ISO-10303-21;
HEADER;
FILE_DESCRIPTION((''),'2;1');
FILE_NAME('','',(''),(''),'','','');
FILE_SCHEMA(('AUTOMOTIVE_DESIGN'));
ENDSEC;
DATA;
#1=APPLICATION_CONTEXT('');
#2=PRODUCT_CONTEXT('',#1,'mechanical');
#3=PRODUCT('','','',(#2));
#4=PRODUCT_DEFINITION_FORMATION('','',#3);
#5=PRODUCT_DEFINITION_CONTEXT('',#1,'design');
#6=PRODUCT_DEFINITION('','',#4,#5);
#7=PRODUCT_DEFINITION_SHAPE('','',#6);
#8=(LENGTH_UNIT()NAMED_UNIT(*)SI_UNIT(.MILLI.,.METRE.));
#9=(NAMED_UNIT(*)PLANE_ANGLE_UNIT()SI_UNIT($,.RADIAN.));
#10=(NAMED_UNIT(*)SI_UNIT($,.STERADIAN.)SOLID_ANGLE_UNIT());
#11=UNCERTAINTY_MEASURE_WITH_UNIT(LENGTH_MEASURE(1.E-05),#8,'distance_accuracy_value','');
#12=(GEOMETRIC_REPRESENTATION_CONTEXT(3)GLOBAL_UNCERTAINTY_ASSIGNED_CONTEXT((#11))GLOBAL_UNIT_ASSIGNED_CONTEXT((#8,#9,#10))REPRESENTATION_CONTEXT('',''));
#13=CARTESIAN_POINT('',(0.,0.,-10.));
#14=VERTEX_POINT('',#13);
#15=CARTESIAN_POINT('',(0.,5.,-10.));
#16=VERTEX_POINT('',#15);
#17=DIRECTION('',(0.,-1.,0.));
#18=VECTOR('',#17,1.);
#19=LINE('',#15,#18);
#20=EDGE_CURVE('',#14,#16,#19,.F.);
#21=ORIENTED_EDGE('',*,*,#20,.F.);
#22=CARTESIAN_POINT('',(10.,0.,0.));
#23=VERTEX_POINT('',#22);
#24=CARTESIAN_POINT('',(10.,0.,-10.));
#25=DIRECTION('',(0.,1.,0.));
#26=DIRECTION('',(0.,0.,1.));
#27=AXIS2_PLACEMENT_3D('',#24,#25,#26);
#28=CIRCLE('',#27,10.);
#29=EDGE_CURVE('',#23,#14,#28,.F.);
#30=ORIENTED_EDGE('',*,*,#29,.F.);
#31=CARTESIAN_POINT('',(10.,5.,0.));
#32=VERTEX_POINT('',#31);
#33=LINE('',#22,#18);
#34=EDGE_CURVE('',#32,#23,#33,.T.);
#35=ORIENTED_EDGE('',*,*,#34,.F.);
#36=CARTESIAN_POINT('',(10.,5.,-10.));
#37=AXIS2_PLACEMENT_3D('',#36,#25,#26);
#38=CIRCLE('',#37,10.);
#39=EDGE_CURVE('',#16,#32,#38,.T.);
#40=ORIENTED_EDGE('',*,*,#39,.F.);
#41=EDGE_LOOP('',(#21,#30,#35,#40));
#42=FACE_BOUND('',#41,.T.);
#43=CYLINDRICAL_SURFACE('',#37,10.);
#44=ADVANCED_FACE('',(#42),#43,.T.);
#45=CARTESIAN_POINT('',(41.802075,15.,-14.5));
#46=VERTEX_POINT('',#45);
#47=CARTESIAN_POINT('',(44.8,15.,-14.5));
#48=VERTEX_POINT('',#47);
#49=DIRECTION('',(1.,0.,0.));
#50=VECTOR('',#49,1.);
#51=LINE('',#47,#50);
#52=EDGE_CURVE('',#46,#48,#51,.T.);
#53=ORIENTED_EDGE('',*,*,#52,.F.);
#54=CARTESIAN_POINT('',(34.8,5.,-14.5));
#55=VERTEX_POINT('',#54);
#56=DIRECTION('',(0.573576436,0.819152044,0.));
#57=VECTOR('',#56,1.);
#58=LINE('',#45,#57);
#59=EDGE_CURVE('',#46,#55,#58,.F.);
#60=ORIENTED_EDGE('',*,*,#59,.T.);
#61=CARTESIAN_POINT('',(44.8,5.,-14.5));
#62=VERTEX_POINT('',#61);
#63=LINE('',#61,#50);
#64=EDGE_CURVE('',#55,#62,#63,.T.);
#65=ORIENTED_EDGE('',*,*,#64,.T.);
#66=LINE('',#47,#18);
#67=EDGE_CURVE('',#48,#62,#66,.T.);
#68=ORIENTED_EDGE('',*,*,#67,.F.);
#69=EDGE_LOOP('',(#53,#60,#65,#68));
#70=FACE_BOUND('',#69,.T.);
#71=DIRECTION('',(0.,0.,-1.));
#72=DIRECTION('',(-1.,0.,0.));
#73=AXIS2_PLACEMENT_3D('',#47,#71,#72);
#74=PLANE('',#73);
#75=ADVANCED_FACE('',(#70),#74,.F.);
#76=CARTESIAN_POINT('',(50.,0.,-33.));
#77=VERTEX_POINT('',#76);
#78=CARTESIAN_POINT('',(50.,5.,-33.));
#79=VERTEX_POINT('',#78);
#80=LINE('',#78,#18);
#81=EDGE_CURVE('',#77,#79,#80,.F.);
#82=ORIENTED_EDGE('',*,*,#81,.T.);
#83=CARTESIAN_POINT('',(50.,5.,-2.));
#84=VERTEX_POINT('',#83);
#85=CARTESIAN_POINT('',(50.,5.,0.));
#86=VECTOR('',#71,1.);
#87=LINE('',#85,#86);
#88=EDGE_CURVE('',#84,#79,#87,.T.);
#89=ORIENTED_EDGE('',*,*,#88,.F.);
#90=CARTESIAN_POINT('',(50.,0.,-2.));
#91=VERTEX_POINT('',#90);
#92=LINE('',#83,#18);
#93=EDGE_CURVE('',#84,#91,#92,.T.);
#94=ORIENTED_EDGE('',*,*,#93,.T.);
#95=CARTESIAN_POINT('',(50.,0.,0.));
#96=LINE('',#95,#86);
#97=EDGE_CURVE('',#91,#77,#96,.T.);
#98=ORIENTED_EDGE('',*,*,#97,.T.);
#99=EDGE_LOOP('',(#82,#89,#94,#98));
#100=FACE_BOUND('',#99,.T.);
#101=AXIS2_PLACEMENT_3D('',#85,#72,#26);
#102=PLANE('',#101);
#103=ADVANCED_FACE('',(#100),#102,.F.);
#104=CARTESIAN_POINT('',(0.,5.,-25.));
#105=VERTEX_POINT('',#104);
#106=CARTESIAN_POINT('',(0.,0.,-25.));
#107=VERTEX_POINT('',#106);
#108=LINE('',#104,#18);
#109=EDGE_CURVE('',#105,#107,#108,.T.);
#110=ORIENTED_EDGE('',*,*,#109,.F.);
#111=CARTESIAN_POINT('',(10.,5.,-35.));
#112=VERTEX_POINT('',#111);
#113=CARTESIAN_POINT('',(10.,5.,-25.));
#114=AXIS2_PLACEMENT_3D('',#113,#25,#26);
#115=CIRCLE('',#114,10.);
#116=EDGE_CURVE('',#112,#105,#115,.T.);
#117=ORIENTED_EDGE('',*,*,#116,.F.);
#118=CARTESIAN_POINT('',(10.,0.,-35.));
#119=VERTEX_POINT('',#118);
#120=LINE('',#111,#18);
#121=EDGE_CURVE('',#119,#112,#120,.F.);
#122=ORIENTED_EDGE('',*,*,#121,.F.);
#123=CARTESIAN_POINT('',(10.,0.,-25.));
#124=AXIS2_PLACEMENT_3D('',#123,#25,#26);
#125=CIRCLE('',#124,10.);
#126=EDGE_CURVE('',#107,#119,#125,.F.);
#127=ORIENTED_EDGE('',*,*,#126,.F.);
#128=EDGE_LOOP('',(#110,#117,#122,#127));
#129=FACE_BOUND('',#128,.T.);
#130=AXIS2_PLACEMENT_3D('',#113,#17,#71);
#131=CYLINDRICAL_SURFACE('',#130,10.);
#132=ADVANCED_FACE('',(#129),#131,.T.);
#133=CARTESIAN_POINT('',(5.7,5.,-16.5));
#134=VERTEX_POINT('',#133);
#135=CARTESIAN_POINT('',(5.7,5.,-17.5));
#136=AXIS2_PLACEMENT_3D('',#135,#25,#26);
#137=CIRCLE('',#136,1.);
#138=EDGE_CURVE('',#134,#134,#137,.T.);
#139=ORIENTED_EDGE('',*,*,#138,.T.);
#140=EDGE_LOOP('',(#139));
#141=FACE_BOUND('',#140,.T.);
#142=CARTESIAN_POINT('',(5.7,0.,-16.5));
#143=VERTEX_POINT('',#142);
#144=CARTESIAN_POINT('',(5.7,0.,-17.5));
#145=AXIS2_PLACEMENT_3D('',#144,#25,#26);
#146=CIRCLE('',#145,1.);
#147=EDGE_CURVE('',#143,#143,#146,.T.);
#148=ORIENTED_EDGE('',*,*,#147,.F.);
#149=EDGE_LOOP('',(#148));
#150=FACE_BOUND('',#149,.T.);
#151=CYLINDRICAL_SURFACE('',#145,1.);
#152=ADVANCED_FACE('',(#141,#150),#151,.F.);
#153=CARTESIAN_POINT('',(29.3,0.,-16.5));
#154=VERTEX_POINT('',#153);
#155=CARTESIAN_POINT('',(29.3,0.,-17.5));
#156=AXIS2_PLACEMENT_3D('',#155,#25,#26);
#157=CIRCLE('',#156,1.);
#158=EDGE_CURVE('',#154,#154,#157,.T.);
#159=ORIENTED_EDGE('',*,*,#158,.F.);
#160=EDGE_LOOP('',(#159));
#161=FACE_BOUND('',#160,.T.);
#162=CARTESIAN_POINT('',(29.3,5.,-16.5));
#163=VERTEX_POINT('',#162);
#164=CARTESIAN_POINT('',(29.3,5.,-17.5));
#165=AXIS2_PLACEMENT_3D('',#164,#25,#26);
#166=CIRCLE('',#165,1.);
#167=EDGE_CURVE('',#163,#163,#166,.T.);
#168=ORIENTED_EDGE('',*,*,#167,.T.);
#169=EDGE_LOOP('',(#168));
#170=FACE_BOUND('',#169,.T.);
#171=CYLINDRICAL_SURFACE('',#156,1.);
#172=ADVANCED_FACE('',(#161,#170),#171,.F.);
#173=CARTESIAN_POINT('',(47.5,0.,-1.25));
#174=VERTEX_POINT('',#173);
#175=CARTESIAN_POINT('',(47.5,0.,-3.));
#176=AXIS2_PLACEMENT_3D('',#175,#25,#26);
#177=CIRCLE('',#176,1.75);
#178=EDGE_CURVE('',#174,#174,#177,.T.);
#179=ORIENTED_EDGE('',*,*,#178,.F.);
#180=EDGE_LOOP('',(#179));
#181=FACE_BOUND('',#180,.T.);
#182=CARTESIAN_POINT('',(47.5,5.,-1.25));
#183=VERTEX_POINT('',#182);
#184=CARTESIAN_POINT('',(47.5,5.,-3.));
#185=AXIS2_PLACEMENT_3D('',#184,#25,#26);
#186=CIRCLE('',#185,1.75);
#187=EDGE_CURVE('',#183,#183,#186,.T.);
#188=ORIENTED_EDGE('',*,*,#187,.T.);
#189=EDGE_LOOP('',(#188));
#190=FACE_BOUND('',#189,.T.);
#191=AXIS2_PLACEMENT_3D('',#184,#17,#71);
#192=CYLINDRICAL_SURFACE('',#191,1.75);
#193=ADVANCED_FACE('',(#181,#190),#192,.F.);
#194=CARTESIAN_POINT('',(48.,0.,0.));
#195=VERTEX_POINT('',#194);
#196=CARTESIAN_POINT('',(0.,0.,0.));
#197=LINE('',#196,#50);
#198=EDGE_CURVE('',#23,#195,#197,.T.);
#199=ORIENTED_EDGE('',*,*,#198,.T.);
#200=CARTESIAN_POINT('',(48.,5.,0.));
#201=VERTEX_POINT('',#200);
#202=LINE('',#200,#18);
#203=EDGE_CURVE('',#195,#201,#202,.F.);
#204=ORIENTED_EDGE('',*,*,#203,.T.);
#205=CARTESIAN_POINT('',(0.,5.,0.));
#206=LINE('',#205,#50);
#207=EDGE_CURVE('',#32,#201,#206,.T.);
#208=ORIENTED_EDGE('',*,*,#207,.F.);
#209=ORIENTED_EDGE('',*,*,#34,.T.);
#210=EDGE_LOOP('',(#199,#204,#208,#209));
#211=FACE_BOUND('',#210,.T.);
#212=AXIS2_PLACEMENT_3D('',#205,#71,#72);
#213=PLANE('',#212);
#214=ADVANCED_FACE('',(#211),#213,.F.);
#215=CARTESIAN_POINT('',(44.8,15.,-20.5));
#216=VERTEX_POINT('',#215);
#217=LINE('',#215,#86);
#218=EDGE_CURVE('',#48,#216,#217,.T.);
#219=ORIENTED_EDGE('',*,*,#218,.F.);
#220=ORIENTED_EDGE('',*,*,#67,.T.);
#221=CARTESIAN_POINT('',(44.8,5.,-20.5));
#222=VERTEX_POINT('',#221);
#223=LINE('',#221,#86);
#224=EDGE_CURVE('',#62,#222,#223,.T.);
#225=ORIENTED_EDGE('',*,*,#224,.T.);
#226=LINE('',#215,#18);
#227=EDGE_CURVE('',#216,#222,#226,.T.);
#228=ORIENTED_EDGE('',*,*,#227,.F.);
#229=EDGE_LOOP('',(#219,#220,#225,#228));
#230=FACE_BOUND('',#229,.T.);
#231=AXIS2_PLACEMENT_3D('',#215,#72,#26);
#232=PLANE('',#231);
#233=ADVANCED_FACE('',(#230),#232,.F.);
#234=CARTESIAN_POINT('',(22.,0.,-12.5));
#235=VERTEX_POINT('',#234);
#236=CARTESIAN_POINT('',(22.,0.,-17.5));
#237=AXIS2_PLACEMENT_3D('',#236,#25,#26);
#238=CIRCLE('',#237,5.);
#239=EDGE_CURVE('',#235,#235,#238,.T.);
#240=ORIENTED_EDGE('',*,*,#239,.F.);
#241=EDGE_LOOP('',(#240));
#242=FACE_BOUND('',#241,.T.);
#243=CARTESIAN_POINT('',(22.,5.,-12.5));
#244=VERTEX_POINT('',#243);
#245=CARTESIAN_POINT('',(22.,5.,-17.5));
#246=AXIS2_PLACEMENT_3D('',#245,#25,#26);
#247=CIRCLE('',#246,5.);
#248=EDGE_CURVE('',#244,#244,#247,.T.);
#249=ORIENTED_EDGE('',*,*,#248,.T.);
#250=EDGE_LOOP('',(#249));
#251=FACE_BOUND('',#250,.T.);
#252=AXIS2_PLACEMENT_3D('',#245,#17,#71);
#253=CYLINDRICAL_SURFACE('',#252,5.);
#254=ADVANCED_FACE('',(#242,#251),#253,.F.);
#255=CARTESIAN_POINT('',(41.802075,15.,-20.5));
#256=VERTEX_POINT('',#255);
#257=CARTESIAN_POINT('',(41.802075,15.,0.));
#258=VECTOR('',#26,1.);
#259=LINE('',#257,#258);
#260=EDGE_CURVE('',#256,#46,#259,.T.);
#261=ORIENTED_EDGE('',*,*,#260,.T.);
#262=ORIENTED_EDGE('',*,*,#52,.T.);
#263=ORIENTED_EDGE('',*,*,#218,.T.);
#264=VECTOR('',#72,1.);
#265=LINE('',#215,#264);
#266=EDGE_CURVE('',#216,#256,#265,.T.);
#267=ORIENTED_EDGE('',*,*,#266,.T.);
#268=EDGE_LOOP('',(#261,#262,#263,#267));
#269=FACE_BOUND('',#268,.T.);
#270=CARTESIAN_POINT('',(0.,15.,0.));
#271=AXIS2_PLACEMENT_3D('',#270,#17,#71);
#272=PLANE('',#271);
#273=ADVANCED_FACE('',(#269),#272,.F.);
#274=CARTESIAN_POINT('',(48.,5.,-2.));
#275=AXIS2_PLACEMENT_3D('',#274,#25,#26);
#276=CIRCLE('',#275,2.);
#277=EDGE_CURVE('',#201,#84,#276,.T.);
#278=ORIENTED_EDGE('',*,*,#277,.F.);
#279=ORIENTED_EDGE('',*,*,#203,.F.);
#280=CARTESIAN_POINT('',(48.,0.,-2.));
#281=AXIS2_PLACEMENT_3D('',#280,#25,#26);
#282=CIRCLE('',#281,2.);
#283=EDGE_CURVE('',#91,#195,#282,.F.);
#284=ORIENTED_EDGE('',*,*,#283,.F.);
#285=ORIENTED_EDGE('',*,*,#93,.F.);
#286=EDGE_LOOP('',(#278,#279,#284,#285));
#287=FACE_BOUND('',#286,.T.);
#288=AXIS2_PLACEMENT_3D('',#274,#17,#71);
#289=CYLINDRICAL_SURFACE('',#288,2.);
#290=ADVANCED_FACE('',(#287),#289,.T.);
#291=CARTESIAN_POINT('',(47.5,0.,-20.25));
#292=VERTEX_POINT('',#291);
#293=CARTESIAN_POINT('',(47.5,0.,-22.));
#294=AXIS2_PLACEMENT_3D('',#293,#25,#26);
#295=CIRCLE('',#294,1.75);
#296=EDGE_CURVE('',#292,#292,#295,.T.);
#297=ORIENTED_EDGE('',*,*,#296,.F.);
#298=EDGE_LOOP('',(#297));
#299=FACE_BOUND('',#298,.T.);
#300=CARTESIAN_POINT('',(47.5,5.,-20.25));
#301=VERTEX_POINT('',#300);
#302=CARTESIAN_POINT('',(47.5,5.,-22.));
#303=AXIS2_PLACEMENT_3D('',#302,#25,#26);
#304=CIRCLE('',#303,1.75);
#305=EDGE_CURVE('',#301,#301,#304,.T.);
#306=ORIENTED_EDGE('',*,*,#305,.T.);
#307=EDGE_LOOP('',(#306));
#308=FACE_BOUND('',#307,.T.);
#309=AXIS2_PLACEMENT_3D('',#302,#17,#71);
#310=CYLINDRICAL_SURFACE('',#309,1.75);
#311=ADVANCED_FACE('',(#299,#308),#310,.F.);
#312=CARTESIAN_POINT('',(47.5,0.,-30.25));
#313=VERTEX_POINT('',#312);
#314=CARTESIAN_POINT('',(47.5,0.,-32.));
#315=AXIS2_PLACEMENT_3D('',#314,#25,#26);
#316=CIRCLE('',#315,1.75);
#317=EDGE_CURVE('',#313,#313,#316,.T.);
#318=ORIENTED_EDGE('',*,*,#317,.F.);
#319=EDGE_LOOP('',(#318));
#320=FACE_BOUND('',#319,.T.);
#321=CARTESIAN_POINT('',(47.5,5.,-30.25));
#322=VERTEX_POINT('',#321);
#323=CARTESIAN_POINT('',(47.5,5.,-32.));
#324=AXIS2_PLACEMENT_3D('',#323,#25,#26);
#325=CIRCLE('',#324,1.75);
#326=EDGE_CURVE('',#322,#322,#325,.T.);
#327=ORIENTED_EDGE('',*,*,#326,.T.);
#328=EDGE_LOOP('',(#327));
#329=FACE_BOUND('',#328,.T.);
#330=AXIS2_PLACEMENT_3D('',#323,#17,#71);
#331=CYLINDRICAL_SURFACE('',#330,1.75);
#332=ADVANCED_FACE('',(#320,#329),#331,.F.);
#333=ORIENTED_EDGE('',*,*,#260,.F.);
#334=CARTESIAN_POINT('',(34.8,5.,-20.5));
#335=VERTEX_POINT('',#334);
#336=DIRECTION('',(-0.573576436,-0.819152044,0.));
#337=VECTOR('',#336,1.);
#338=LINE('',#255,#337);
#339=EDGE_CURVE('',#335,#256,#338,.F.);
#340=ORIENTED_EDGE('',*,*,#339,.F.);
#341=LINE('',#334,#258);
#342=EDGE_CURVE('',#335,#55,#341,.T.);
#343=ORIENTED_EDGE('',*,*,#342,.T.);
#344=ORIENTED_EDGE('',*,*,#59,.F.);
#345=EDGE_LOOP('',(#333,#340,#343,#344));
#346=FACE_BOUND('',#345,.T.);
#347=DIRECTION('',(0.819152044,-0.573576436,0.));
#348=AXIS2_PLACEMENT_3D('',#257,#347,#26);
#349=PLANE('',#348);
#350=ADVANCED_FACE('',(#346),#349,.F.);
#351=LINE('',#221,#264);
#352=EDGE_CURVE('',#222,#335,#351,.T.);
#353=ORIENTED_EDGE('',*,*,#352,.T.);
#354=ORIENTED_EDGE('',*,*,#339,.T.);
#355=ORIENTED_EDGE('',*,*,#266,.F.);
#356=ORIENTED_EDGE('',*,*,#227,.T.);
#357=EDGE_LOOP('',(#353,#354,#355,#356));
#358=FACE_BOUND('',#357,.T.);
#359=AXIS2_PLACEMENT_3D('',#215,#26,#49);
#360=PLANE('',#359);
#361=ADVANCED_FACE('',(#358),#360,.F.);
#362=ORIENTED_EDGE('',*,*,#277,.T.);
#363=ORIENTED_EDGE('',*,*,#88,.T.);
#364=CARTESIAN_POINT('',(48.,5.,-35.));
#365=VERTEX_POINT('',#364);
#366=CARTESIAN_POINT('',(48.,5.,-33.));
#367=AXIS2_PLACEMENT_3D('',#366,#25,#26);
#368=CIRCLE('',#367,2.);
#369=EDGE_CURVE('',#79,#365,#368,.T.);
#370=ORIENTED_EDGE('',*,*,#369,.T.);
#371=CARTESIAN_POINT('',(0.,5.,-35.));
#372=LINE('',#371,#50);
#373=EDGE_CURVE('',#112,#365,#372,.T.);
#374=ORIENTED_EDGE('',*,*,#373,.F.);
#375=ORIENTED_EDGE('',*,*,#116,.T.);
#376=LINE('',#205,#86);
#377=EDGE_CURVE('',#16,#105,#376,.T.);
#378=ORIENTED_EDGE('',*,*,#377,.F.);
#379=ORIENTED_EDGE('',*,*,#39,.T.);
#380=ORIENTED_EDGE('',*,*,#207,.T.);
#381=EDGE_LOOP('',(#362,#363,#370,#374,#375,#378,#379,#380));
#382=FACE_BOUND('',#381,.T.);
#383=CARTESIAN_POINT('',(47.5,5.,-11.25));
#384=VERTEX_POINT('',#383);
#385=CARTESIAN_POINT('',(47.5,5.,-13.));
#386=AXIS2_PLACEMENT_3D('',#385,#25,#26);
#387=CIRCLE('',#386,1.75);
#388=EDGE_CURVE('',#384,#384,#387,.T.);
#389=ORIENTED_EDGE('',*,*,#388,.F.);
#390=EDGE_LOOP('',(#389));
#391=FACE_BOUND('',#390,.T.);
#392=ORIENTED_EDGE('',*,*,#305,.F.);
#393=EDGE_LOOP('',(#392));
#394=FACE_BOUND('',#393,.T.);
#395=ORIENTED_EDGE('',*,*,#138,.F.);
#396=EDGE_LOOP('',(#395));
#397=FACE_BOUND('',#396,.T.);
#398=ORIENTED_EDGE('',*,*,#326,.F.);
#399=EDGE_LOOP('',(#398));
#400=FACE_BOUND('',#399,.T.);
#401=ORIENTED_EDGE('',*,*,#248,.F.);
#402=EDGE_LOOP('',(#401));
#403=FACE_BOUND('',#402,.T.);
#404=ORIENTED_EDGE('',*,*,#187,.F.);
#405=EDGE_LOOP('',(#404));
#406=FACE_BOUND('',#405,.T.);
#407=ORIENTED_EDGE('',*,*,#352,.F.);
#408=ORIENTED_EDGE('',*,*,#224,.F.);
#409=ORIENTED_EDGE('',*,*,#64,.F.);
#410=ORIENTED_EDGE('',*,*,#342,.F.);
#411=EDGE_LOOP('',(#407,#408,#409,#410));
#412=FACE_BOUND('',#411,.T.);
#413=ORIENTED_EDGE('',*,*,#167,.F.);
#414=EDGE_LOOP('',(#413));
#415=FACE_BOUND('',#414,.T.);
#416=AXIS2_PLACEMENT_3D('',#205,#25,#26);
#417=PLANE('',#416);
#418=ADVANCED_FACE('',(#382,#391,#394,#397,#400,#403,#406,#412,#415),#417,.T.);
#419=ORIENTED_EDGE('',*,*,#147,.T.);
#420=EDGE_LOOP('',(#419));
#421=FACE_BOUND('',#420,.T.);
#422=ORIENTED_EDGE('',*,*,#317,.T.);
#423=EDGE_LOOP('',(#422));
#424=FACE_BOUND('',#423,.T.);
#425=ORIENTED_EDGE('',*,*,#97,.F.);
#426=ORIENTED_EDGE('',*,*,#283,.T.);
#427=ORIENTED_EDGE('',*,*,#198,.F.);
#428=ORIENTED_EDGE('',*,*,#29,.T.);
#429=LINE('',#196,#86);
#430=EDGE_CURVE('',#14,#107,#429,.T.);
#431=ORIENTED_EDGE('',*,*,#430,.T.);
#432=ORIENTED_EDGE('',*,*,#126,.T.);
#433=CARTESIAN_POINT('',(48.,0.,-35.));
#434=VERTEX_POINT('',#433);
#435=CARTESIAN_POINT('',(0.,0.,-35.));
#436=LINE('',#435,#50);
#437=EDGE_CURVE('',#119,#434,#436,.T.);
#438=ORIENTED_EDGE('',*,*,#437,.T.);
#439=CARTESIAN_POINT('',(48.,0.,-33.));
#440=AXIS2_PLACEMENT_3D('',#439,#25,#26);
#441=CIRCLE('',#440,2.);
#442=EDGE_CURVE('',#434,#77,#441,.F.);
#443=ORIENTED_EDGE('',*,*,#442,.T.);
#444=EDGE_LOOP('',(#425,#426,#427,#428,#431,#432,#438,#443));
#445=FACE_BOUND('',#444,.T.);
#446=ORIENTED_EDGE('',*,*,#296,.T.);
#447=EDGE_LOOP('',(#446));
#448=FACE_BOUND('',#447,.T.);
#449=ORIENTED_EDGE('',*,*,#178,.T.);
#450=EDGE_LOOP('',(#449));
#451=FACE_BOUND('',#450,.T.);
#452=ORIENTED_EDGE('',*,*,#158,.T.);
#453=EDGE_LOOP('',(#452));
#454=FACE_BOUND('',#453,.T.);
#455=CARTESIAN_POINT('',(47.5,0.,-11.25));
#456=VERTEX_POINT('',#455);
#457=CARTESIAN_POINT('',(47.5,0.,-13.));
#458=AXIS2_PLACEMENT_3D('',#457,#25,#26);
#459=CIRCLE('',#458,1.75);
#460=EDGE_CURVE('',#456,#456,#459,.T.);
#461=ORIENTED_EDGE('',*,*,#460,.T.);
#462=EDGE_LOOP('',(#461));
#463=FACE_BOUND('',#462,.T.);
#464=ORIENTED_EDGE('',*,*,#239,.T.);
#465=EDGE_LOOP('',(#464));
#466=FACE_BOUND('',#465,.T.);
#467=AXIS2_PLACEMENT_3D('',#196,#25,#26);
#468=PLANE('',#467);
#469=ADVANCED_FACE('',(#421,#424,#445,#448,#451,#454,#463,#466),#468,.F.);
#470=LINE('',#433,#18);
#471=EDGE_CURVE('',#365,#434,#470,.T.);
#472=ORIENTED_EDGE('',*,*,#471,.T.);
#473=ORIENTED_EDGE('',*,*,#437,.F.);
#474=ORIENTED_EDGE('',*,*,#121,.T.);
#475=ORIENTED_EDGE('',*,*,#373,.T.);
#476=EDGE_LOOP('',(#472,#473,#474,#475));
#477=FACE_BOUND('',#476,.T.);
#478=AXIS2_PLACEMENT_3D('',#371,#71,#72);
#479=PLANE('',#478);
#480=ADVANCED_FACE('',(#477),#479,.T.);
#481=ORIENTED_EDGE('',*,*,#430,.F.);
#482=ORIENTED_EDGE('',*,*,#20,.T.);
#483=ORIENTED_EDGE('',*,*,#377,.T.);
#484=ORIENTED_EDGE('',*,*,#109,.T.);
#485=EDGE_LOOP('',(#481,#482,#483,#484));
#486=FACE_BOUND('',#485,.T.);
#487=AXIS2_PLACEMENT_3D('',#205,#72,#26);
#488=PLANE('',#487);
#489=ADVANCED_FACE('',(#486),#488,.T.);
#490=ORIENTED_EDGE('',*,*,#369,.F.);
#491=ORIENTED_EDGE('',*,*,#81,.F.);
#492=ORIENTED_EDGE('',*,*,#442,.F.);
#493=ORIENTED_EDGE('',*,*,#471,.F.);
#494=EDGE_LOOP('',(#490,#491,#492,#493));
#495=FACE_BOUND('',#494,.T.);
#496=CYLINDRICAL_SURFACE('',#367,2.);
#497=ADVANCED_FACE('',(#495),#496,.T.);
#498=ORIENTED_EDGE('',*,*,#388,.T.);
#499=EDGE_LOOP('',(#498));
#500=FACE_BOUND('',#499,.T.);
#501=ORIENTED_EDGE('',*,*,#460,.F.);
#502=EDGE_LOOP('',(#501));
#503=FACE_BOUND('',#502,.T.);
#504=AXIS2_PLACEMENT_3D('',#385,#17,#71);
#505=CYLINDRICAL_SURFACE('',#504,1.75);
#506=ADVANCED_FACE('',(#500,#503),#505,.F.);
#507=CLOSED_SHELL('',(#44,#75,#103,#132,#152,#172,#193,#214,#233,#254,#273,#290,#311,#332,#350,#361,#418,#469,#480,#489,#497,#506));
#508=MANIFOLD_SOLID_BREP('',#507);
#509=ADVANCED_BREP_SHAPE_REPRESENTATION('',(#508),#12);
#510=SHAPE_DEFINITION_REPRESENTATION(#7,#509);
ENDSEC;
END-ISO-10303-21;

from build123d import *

# Parameters (mm, degrees)
SKETCH1_W           = 50
SKETCH1_H           = 35
SKETCH1_R           = 5
SKETCH1_R_2         = 1.75
BOSS_EXTRUDE1_DEPTH = 5
FILLET1_R           = 10
FILLET2_R           = 2
SKETCH2_W           = 10
SKETCH2_H           = 6
BOSS_EXTRUDE2_DEPTH = 10
CHAMFER1_SIZE2      = 7.002075382
CHAMFER1_SIZE       = 10
SKETCH3_R           = 1
CUT_EXTRUDE1_DEPTH  = 62.846584384


with BuildPart() as part:
    # Sketch1 → Boss-Extrude1 (new body)
    with BuildSketch(Plane(origin=(0, 0, 0), x_dir=(1, 0, 0), z_dir=(0, 1, 0))):
        with Locations((25, 17.5)):
            Rectangle(SKETCH1_W, SKETCH1_H)
        with Locations(Location((22, 17.5, 0), (0, 0, 270))):
            Circle(SKETCH1_R, mode=Mode.SUBTRACT)
        with Locations(Location((47.5, 32, 0), (0, 0, 270))):
            Circle(SKETCH1_R_2, mode=Mode.SUBTRACT)
        with Locations(Location((47.5, 22, 0), (0, 0, 270))):
            Circle(SKETCH1_R_2, mode=Mode.SUBTRACT)
        with Locations(Location((47.5, 13, 0), (0, 0, 270))):
            Circle(SKETCH1_R_2, mode=Mode.SUBTRACT)
        with Locations(Location((47.5, 3, 0), (0, 0, 270))):
            Circle(SKETCH1_R_2, mode=Mode.SUBTRACT)
    extrude(amount=BOSS_EXTRUDE1_DEPTH)

    # Fillet1
    fillet1_edges = [part.edges().sort_by_distance(p)[0] for p in [
        (0, 2.5, 0),
        (0, 2.5, -35),
    ]]
    fillet(fillet1_edges, radius=FILLET1_R)

    # Fillet2
    fillet2_edges = [part.edges().sort_by_distance(p)[0] for p in [
        (50, 2.5, -35),
        (50, 2.5, 0),
    ]]
    fillet(fillet2_edges, radius=FILLET2_R)

    # Sketch2 → Boss-Extrude2 (add)
    with BuildSketch(Plane(origin=(0, 5, 0), x_dir=(1, 0, 0), z_dir=(0, 1, 0))):
        with Locations((39.8, 17.5)):
            Rectangle(SKETCH2_W, SKETCH2_H)
    extrude(amount=BOSS_EXTRUDE2_DEPTH)

    # Chamfer1
    chamfer1_edges = [part.edges().sort_by_distance(p)[0] for p in [
        (34.8, 15, -17.5),
    ]]
    chamfer1_side = [part.faces().sort_by_distance(p)[0] for p in [
        (34.8, 14.859958492, -17.5),
    ]]
    chamfer(chamfer1_edges, length=CHAMFER1_SIZE - 0.0001, length2=CHAMFER1_SIZE2 - 0.0001, reference=chamfer1_side[0])  # a hair under: the kernel refuses the full size

    # Sketch3 → Cut-Extrude1 (cut, through all)
    with BuildSketch(Plane(origin=(0, 5, 0), x_dir=(1, 0, 0), z_dir=(0, 1, 0))):
        with Locations(Location((5.7, 17.5, 0), (0, 0, 270))):
            Circle(SKETCH3_R)
        with Locations(Location((29.3, 17.5, 0), (0, 0, 270))):
            Circle(SKETCH3_R)
    extrude(amount=-CUT_EXTRUDE1_DEPTH, mode=Mode.SUBTRACT)


solid = part.part
